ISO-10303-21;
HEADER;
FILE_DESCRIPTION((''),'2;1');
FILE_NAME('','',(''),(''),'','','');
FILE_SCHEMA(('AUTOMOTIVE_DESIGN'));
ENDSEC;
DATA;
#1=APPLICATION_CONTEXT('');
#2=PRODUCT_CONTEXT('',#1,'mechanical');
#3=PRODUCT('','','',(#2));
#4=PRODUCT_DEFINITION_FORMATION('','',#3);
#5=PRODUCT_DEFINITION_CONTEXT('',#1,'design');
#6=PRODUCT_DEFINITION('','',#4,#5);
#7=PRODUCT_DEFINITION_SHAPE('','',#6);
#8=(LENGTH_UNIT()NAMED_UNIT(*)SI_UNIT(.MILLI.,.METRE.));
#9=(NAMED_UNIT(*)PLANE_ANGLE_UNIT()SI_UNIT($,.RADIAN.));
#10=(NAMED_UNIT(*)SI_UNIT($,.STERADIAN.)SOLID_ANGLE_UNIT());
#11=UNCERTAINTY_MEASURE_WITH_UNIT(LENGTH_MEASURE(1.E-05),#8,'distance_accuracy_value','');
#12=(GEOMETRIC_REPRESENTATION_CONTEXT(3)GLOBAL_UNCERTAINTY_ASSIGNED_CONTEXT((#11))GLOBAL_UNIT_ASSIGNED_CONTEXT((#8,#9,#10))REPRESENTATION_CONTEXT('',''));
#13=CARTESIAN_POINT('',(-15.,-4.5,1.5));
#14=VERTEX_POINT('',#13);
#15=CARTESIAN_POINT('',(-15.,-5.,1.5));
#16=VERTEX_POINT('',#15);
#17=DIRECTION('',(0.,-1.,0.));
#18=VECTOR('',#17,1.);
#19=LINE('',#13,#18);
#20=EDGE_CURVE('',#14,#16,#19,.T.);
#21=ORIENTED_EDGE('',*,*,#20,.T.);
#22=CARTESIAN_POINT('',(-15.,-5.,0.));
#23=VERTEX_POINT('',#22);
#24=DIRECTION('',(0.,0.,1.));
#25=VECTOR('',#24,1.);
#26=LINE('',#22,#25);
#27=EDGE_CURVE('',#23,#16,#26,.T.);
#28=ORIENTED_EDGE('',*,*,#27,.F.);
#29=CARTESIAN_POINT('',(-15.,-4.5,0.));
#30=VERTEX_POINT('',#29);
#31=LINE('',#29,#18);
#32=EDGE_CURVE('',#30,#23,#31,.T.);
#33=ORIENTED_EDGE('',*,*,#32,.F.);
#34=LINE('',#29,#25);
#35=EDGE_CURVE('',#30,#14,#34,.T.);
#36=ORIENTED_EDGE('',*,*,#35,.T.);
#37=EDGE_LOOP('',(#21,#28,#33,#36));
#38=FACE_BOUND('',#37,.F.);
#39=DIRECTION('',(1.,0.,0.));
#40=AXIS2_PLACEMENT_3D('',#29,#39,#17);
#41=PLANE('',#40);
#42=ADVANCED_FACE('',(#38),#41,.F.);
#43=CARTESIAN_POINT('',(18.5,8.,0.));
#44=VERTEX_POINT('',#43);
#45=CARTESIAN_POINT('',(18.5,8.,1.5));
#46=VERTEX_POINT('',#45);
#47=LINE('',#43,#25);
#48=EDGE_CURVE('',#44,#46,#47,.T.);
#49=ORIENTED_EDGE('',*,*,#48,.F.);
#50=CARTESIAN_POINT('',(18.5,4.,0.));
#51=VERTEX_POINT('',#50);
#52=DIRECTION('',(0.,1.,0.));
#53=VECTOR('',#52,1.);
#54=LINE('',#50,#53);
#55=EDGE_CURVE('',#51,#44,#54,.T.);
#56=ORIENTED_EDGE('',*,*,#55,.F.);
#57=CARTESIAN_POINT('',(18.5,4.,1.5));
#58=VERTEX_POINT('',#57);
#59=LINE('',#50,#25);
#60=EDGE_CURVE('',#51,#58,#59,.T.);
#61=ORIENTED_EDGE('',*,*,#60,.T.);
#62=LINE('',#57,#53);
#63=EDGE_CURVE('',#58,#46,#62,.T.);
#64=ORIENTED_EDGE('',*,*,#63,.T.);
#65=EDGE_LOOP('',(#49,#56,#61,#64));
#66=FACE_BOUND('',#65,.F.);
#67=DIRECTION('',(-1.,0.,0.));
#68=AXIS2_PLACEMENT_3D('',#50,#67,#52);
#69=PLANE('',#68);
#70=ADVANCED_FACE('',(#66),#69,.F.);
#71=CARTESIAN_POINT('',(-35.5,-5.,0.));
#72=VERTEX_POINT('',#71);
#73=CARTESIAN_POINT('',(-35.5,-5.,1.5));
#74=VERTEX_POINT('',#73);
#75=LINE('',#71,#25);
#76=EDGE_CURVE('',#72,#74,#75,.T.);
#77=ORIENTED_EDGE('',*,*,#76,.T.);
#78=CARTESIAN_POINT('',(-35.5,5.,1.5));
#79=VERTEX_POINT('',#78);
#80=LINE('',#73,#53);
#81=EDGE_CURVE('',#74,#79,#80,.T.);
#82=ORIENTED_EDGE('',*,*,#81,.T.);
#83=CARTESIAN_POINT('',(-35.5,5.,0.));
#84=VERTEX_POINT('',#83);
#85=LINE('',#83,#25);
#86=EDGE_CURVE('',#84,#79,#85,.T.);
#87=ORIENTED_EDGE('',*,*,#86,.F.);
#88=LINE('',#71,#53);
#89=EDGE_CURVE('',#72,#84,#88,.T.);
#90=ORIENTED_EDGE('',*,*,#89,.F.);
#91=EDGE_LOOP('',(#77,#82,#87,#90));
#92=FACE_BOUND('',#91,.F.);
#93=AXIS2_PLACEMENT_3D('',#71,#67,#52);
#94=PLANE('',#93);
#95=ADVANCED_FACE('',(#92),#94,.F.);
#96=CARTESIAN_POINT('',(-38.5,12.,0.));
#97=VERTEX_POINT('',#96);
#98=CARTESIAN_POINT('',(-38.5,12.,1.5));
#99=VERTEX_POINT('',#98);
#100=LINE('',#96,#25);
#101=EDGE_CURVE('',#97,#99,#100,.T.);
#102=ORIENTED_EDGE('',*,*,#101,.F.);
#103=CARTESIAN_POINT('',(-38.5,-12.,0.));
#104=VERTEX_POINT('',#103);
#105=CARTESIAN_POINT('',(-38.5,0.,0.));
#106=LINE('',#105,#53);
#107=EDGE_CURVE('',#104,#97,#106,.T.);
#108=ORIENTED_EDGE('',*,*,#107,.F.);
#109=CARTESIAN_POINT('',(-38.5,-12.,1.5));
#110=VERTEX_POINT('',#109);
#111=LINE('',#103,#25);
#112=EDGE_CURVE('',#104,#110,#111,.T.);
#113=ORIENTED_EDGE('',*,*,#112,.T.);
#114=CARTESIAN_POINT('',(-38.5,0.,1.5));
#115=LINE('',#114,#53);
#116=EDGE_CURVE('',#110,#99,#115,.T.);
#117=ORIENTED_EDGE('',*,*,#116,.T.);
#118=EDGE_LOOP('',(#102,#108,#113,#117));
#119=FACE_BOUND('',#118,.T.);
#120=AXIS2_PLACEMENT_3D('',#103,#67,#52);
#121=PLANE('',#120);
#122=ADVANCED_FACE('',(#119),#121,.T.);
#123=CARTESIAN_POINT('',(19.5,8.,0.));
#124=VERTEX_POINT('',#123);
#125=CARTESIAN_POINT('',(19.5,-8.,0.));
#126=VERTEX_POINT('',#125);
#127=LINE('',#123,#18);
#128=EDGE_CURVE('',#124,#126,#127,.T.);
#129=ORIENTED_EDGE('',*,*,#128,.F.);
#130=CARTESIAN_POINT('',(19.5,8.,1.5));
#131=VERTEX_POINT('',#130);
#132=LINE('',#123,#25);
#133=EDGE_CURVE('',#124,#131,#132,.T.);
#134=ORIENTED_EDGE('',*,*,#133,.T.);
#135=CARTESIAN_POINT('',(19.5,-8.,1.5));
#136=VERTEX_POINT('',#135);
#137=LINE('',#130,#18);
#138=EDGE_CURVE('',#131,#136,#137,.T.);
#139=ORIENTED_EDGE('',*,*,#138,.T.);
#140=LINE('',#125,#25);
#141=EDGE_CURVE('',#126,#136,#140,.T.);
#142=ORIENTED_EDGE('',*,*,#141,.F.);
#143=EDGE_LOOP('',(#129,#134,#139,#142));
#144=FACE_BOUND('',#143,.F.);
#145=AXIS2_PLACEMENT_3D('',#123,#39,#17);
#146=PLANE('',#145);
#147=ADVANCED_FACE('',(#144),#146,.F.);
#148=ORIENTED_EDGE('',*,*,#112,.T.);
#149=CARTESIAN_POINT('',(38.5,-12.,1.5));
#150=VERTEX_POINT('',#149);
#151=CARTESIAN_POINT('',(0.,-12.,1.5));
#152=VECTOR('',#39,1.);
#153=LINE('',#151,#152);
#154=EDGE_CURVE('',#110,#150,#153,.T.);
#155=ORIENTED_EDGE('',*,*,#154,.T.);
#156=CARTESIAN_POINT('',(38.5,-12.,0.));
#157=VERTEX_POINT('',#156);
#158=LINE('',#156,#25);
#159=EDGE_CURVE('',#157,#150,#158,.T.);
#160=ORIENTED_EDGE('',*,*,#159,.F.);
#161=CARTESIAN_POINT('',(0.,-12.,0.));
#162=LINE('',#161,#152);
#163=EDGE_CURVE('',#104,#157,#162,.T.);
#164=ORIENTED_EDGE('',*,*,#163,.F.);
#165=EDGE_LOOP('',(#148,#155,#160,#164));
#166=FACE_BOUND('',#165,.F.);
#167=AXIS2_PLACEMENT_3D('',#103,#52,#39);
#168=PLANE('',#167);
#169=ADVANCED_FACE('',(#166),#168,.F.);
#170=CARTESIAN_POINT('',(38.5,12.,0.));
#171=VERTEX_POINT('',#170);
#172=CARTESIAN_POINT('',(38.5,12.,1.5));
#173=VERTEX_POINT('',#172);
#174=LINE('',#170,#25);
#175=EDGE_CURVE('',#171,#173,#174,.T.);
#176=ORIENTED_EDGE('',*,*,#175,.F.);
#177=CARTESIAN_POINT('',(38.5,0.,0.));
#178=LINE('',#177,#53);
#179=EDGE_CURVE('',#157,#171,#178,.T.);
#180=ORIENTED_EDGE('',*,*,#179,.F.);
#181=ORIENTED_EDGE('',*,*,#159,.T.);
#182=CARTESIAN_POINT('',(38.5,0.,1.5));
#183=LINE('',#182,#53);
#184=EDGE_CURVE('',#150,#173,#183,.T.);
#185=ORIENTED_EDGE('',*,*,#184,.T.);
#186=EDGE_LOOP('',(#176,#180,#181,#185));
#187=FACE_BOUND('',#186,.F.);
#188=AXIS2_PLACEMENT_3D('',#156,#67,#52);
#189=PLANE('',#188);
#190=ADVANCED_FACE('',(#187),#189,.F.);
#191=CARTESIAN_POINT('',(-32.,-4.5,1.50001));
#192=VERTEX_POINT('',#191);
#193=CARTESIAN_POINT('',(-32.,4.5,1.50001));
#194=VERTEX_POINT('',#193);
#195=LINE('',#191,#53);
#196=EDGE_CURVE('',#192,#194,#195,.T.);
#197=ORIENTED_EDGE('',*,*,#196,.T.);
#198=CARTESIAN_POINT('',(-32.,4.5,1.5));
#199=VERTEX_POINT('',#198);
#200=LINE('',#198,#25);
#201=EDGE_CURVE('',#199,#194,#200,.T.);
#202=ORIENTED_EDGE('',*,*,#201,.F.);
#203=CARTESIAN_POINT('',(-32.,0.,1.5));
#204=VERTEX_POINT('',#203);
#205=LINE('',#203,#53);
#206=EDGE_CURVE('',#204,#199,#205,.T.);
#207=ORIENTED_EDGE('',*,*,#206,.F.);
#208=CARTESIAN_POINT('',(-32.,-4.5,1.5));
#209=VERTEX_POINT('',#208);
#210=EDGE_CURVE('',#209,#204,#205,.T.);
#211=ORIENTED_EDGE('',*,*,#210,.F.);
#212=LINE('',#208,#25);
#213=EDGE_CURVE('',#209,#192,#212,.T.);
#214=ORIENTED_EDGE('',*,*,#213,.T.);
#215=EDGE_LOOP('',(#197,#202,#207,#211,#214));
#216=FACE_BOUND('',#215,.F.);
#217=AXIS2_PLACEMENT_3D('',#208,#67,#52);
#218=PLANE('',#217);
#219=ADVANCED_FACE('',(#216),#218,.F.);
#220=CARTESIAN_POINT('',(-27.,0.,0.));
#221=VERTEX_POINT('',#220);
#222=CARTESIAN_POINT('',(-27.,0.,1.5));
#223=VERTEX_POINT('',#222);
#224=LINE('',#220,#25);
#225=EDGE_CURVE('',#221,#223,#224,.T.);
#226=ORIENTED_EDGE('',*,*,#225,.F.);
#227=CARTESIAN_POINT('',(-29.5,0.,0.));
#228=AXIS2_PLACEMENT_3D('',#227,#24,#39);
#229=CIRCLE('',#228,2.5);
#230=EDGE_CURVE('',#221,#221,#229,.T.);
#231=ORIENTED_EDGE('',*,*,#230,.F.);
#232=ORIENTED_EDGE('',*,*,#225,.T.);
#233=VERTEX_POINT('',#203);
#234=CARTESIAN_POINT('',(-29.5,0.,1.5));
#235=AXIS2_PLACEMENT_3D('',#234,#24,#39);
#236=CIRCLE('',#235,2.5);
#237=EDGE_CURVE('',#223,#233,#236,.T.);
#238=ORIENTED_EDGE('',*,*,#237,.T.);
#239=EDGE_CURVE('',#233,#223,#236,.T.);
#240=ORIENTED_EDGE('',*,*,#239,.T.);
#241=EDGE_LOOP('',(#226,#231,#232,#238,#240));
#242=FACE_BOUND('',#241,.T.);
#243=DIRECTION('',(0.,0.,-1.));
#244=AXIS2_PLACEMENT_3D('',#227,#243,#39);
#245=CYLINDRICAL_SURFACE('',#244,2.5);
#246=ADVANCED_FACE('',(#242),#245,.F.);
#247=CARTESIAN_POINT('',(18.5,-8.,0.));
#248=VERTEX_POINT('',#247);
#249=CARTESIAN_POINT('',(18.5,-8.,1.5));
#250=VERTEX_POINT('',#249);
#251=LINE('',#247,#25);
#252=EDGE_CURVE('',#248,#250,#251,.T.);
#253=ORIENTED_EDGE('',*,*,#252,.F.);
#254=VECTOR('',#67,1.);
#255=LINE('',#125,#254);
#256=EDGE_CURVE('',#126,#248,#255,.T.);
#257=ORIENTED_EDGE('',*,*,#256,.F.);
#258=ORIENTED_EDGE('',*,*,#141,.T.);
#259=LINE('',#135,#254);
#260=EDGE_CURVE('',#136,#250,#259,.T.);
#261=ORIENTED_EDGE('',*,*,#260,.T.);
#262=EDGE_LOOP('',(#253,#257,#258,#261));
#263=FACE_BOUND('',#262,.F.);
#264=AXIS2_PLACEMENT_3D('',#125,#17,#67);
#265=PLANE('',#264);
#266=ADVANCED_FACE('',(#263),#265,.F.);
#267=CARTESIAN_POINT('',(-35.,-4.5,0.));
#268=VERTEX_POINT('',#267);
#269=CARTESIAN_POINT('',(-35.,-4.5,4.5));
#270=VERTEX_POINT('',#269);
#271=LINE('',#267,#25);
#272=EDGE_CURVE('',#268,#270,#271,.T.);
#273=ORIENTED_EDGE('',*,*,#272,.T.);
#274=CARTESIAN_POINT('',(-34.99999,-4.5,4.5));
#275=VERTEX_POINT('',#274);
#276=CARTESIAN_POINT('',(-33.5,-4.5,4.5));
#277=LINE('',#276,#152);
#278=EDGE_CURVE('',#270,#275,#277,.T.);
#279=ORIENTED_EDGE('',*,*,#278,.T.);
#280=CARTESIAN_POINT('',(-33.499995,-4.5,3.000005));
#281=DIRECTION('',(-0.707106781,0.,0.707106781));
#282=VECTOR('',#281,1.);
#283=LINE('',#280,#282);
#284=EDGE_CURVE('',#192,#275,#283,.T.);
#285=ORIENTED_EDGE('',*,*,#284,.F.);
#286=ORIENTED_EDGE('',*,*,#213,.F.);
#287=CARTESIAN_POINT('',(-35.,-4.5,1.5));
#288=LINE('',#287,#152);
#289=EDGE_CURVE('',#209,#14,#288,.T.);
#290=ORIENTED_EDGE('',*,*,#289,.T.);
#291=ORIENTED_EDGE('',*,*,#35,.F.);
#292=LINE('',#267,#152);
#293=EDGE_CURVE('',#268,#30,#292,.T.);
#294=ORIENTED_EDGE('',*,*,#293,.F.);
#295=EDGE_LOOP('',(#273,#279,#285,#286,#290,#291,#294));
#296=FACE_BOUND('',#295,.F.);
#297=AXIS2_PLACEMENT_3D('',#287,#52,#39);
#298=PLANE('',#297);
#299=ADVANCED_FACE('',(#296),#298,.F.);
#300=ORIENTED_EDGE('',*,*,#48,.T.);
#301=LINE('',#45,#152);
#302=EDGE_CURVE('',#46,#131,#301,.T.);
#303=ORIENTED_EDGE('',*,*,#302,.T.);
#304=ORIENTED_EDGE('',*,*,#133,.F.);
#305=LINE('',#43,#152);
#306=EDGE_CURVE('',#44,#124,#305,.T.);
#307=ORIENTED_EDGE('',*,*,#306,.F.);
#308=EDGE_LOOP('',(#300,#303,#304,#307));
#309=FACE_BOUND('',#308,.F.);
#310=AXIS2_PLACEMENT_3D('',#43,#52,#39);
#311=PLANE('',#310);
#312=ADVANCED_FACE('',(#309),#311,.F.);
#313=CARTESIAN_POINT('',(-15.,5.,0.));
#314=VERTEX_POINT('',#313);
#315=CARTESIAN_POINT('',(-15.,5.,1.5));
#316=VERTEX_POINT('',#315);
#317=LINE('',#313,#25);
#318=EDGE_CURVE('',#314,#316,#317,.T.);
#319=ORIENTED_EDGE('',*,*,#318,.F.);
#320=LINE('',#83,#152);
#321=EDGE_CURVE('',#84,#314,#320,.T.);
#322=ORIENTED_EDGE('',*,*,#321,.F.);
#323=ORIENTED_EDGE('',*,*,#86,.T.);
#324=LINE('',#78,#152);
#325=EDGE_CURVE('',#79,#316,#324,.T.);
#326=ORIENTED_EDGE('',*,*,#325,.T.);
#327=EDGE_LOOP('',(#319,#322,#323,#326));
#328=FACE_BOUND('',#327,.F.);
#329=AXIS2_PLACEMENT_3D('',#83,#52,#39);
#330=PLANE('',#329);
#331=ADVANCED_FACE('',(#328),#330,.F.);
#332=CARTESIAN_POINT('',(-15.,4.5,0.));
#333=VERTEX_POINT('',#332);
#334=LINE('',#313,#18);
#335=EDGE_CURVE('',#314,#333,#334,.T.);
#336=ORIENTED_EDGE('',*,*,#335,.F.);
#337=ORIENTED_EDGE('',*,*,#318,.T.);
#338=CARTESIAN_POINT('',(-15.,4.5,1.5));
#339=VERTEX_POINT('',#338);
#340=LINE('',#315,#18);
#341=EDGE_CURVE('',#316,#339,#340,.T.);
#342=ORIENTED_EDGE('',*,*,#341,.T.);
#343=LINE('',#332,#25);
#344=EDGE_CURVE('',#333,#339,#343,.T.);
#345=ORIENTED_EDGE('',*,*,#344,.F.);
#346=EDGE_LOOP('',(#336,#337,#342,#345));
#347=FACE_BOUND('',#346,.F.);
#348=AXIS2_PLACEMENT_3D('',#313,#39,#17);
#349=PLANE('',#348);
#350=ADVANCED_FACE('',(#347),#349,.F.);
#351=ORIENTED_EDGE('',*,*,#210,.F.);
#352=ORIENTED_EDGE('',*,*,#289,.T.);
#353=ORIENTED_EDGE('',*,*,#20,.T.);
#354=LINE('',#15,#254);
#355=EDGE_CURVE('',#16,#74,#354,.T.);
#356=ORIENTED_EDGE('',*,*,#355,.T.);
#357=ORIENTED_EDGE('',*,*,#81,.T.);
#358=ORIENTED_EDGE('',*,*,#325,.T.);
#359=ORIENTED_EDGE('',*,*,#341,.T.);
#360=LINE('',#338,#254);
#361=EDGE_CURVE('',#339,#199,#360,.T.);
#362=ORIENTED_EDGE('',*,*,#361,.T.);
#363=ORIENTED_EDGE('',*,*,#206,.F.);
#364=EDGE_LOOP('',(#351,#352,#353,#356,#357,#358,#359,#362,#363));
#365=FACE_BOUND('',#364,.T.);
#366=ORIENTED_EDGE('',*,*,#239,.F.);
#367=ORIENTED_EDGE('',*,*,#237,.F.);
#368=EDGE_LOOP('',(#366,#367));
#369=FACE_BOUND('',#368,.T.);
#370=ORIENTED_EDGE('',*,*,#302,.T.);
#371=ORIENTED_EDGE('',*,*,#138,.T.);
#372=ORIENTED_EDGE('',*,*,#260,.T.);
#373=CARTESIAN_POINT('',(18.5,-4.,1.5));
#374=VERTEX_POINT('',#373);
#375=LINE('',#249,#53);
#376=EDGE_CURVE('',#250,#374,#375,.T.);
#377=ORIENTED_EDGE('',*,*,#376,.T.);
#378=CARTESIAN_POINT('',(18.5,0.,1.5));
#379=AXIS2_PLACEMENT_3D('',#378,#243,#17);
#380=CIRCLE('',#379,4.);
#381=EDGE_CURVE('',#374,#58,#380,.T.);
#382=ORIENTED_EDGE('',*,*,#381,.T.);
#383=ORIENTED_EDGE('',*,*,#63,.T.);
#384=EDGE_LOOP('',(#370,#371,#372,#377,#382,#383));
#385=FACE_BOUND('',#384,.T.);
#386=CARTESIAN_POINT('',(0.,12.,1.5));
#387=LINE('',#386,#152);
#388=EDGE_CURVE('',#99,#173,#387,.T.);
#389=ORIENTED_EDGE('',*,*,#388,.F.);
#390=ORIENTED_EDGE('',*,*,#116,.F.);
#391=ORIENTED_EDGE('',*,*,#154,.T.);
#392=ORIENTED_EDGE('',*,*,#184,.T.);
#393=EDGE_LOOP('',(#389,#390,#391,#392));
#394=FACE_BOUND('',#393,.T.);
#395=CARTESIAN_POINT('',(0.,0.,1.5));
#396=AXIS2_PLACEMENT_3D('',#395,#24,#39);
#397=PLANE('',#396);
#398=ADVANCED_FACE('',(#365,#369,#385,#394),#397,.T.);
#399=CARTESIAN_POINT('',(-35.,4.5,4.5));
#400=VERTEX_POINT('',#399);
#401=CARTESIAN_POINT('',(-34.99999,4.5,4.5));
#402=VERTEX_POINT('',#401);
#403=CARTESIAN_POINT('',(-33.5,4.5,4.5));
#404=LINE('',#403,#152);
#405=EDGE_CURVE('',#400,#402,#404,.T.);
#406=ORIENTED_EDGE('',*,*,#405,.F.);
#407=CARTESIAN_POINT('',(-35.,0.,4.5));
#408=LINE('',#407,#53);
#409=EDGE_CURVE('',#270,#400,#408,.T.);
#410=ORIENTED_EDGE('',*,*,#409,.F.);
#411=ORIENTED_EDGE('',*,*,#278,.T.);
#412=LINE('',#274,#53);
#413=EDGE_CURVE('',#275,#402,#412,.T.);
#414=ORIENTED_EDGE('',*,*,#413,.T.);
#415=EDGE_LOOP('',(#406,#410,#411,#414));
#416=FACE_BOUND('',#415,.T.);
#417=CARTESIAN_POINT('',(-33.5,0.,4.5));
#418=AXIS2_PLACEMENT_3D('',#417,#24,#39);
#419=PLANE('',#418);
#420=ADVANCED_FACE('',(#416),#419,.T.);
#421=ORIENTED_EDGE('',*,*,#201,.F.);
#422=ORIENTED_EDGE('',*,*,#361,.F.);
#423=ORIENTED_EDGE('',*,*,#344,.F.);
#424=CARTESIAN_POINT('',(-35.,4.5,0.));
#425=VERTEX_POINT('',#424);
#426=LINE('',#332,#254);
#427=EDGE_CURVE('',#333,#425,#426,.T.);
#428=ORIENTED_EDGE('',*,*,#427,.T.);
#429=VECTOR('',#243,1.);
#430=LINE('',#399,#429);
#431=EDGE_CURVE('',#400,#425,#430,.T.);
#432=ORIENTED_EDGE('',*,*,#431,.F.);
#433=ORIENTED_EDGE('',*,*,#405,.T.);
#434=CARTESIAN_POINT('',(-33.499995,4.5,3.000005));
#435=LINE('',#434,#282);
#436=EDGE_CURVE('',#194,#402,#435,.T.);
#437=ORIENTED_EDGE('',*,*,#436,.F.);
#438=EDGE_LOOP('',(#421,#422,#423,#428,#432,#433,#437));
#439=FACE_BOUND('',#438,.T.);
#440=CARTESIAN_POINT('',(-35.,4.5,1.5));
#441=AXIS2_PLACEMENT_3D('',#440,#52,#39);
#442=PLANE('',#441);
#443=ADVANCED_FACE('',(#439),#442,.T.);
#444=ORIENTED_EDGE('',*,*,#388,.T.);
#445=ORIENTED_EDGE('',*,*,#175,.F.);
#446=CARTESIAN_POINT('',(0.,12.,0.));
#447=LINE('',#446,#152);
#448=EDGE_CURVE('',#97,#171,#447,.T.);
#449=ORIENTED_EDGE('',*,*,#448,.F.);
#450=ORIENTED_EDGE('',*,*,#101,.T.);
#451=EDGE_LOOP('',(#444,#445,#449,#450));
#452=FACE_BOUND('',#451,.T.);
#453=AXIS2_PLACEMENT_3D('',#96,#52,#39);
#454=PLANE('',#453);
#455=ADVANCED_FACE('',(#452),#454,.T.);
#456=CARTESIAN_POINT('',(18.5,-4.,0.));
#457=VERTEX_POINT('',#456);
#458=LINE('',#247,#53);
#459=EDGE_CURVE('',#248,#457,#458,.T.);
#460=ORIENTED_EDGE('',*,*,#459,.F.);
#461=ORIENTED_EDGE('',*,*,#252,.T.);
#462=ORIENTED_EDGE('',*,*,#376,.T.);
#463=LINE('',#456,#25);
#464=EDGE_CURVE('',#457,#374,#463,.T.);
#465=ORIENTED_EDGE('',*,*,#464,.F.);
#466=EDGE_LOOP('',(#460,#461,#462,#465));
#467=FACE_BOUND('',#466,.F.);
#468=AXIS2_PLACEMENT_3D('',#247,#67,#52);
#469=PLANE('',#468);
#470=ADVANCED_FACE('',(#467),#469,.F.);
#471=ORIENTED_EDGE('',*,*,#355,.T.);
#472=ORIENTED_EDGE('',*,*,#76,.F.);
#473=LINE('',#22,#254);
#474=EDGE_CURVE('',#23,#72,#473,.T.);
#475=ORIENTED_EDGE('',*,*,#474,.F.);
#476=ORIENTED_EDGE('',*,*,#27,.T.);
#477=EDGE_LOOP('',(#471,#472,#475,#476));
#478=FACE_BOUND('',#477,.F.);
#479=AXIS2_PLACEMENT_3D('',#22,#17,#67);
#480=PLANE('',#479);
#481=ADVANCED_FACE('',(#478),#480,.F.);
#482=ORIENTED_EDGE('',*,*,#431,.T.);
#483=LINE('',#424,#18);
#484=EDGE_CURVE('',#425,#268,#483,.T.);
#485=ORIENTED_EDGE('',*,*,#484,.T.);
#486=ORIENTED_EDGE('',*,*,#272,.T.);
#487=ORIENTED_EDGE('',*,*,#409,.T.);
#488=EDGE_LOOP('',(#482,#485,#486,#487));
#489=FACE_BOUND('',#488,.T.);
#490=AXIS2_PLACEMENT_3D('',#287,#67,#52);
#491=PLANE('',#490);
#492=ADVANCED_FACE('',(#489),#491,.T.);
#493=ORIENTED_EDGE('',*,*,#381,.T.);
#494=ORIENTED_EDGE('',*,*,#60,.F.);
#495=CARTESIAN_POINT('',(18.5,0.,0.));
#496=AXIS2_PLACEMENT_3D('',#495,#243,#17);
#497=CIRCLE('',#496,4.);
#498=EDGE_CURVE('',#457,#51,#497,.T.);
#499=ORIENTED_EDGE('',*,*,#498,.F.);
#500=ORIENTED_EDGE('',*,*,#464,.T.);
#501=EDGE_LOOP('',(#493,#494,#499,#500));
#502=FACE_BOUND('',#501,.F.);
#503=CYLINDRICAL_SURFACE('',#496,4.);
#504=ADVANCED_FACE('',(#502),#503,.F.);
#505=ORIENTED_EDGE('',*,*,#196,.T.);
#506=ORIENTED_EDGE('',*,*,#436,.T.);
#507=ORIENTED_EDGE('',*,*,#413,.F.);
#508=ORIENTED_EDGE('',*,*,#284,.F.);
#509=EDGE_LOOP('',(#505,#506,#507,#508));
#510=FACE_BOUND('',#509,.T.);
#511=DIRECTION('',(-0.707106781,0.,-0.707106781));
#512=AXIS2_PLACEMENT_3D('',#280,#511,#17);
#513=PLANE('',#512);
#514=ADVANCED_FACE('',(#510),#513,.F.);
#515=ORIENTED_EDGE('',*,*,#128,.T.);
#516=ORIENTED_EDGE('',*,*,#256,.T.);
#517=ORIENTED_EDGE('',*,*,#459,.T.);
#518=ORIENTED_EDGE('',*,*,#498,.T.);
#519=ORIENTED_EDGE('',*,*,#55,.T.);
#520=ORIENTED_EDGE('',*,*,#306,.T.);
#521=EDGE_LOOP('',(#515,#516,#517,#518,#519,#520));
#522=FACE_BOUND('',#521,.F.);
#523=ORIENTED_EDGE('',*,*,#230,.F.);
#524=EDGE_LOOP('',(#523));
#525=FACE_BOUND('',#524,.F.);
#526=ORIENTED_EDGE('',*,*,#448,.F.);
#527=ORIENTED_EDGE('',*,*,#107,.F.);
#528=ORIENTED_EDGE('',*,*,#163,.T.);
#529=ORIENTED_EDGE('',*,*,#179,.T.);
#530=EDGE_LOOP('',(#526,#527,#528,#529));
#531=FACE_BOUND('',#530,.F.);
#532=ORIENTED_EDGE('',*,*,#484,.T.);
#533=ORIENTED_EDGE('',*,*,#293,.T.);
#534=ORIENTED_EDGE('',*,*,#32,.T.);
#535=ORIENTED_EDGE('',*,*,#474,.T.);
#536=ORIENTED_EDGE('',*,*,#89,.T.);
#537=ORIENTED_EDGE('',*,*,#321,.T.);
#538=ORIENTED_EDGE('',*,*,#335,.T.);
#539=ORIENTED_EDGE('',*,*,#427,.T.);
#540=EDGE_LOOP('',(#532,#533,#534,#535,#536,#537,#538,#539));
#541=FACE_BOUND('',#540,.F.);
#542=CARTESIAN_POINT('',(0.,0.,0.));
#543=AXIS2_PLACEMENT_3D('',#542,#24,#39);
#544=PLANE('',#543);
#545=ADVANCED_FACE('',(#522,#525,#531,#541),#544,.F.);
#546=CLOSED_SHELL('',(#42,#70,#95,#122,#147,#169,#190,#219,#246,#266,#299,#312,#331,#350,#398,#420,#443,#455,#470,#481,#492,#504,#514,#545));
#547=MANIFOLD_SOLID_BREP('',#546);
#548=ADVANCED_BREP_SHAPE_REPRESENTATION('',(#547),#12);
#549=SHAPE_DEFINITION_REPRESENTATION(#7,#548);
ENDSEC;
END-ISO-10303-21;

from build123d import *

# Parameters (mm, degrees)
F0_W     = 77
F0_H     = 24
F0_R     = 2.5
F1_DEPTH = 1.5
F2_W     = 3
F2_H     = 9
F3_DEPTH = 3
F4_SIZE  = 2.99999


# Not quite as in the source:
# - a fillet or chamfer is up to 0.001 mm smaller than in the source, because OpenCascade refuses the exact size


with BuildPart() as f1:
    # F0 (on Top) → F1 (new body)
    with BuildSketch(Plane.XY):
        Rectangle(F0_W, F0_H)
        with Locations((-29.5, 0)):
            Circle(F0_R, mode=Mode.SUBTRACT)
        Polygon((-35.5, -5), (-35.5, 5), (-15, 5), (-15, 4.5), (-35, 4.5), (-35, -4.5), (-15, -4.5), (-15, -5), align=None, mode=Mode.SUBTRACT)
        with BuildLine():
            Line((18.5, 4), (18.5, 8))
            Line((18.5, 8), (19.5, 8))
            Line((19.5, 8), (19.5, -8))
            Line((19.5, -8), (18.5, -8))
            Line((18.5, -8), (18.5, -4))
            ThreePointArc((18.5, -4), (14.5, 0), (18.5, 4))
        make_face(mode=Mode.SUBTRACT)
    extrude(amount=F1_DEPTH)

    # F2 (on face) → F3 (join)
    with BuildSketch(Plane.XY.offset(1.5)):
        with Locations((-33.5, 0)):
            Rectangle(F2_W, F2_H)
    extrude(amount=F3_DEPTH)

    # F4 (size 3 in the source; OpenCascade refuses exactly that, so slightly less here)
    f4_edges = [f1.edges().sort_by_distance(p)[0] for p in [
        (-32, 0, 4.5),
    ]]
    chamfer(f4_edges, length=F4_SIZE)


solid = f1.part
